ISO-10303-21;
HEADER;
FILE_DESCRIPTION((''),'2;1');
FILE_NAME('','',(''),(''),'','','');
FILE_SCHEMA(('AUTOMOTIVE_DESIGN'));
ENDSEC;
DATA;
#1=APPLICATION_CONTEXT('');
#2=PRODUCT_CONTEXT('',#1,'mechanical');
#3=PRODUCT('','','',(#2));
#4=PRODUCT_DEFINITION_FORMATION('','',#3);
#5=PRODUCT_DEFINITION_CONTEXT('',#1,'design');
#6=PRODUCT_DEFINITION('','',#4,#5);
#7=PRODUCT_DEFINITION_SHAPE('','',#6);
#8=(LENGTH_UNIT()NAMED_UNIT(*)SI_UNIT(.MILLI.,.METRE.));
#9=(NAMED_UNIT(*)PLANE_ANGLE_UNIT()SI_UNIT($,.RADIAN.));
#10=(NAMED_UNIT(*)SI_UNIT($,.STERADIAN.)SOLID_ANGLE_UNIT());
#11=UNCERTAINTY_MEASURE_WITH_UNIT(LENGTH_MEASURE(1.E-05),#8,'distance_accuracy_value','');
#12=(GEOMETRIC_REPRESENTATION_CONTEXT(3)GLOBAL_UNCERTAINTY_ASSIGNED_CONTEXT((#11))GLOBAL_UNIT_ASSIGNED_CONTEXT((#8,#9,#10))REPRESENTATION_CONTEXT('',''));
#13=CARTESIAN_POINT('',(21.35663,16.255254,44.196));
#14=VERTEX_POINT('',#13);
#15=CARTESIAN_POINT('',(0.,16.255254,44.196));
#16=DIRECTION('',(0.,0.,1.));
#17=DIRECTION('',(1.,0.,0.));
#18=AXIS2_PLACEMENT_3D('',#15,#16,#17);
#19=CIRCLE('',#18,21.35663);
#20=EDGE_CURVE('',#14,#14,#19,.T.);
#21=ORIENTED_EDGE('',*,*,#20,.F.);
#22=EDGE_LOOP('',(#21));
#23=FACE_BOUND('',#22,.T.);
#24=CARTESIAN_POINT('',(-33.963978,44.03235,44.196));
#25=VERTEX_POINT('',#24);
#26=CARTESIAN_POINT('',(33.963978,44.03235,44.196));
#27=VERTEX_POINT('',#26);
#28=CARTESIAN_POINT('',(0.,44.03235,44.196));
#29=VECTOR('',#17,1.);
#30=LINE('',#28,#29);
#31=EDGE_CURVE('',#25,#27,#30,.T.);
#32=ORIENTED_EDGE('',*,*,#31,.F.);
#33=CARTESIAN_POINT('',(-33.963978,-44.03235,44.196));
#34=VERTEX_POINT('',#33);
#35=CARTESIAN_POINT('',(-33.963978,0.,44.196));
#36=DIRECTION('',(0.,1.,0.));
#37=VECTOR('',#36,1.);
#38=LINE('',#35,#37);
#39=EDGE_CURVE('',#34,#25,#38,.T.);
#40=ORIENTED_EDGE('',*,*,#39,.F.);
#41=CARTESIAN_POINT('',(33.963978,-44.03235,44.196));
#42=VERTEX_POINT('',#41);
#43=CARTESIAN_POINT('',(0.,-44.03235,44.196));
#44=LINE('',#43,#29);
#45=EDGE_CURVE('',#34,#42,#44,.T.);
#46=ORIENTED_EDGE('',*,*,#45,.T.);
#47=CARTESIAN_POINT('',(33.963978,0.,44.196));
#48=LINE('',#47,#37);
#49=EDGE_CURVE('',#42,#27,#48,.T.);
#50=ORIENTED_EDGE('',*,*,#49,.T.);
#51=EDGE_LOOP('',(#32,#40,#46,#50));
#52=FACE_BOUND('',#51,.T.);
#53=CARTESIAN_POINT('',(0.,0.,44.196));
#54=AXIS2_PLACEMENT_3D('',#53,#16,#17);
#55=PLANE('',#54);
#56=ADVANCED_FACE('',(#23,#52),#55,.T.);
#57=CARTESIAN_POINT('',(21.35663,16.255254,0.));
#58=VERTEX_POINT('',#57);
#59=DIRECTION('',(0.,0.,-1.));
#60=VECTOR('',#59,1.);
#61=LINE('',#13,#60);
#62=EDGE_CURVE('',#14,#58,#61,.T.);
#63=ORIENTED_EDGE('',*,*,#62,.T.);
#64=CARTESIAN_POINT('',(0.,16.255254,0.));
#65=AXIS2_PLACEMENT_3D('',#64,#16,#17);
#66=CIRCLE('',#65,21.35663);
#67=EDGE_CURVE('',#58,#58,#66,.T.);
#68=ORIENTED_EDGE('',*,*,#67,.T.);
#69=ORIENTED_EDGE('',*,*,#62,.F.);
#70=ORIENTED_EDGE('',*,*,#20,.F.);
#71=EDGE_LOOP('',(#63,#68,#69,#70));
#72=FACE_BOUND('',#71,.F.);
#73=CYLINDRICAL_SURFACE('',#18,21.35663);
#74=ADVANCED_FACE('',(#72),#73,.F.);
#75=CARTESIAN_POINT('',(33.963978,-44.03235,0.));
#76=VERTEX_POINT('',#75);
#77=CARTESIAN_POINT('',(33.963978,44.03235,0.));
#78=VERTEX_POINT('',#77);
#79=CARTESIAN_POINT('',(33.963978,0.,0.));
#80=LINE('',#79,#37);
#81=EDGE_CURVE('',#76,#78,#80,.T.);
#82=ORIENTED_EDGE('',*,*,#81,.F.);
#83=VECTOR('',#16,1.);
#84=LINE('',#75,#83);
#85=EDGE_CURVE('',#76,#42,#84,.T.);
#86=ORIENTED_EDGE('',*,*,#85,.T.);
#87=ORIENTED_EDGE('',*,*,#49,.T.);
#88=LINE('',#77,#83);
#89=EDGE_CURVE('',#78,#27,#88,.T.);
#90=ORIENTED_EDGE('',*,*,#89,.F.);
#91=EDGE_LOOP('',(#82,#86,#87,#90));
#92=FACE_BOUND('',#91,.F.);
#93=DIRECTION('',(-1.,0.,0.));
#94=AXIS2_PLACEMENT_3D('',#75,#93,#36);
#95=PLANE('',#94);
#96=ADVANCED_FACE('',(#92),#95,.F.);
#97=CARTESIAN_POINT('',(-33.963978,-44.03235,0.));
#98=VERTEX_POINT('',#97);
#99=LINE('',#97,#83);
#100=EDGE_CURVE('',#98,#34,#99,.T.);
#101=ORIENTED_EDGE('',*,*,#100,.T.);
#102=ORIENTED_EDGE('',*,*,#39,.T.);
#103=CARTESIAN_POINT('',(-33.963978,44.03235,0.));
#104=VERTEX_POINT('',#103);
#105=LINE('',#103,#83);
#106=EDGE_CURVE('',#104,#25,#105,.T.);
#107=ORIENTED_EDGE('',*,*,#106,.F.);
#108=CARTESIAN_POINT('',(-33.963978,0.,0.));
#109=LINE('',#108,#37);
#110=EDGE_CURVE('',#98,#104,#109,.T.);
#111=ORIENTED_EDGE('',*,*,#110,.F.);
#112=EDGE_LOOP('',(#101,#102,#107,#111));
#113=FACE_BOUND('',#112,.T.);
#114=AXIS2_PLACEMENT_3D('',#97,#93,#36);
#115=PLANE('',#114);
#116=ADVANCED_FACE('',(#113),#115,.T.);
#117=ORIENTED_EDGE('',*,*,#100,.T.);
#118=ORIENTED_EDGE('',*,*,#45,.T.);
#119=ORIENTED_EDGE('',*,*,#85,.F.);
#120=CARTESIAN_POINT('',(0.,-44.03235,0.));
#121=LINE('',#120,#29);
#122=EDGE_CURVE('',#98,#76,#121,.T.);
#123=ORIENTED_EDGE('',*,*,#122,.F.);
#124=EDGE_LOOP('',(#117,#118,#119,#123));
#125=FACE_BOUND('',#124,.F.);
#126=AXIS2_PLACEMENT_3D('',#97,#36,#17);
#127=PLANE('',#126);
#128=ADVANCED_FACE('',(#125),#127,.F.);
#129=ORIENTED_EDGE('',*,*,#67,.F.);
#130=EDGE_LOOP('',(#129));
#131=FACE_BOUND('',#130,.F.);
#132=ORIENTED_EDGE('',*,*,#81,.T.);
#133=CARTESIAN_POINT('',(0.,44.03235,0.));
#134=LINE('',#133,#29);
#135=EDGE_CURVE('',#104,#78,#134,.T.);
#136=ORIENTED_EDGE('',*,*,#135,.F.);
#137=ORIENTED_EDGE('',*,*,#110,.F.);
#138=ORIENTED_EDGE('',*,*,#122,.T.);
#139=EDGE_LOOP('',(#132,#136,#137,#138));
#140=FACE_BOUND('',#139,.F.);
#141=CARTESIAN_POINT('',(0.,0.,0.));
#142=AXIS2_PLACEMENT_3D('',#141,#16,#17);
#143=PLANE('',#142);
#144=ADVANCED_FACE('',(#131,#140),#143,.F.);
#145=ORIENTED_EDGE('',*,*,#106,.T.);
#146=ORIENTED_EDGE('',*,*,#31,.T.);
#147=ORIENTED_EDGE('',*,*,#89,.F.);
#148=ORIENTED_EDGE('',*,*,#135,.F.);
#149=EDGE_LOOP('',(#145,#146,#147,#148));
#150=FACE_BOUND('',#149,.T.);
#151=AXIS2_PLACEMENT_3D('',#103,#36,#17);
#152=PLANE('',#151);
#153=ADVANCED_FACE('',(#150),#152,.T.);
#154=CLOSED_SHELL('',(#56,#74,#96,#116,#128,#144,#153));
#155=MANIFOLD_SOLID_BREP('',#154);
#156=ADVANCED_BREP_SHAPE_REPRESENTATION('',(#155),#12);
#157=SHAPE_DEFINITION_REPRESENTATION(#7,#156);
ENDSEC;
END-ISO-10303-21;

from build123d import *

# Parameters (mm, degrees)
F0_W     = 67.9279565811
F0_H     = 88.0647003651
F1_DEPTH = 44.196
F2_R     = 21.3566300463
F3_DEPTH = 44.197


# Not quite as in the source:
# - a feature of the source that left no trace in its solid (it failed there, or was rolled back) is left out


with BuildPart() as f1:
    # F0 (on Top) → F1 (new body)
    with BuildSketch(Plane.XY):
        Rectangle(F0_W, F0_H)
    extrude(amount=F1_DEPTH)

    # F2 (on face) → F3 (cut, through all)
    with BuildSketch(Plane.XY.offset(44.196)):
        with Locations((0, 16.2552539259)):
            Circle(F2_R)
    extrude(amount=-F3_DEPTH, mode=Mode.SUBTRACT)


solid = f1.part
